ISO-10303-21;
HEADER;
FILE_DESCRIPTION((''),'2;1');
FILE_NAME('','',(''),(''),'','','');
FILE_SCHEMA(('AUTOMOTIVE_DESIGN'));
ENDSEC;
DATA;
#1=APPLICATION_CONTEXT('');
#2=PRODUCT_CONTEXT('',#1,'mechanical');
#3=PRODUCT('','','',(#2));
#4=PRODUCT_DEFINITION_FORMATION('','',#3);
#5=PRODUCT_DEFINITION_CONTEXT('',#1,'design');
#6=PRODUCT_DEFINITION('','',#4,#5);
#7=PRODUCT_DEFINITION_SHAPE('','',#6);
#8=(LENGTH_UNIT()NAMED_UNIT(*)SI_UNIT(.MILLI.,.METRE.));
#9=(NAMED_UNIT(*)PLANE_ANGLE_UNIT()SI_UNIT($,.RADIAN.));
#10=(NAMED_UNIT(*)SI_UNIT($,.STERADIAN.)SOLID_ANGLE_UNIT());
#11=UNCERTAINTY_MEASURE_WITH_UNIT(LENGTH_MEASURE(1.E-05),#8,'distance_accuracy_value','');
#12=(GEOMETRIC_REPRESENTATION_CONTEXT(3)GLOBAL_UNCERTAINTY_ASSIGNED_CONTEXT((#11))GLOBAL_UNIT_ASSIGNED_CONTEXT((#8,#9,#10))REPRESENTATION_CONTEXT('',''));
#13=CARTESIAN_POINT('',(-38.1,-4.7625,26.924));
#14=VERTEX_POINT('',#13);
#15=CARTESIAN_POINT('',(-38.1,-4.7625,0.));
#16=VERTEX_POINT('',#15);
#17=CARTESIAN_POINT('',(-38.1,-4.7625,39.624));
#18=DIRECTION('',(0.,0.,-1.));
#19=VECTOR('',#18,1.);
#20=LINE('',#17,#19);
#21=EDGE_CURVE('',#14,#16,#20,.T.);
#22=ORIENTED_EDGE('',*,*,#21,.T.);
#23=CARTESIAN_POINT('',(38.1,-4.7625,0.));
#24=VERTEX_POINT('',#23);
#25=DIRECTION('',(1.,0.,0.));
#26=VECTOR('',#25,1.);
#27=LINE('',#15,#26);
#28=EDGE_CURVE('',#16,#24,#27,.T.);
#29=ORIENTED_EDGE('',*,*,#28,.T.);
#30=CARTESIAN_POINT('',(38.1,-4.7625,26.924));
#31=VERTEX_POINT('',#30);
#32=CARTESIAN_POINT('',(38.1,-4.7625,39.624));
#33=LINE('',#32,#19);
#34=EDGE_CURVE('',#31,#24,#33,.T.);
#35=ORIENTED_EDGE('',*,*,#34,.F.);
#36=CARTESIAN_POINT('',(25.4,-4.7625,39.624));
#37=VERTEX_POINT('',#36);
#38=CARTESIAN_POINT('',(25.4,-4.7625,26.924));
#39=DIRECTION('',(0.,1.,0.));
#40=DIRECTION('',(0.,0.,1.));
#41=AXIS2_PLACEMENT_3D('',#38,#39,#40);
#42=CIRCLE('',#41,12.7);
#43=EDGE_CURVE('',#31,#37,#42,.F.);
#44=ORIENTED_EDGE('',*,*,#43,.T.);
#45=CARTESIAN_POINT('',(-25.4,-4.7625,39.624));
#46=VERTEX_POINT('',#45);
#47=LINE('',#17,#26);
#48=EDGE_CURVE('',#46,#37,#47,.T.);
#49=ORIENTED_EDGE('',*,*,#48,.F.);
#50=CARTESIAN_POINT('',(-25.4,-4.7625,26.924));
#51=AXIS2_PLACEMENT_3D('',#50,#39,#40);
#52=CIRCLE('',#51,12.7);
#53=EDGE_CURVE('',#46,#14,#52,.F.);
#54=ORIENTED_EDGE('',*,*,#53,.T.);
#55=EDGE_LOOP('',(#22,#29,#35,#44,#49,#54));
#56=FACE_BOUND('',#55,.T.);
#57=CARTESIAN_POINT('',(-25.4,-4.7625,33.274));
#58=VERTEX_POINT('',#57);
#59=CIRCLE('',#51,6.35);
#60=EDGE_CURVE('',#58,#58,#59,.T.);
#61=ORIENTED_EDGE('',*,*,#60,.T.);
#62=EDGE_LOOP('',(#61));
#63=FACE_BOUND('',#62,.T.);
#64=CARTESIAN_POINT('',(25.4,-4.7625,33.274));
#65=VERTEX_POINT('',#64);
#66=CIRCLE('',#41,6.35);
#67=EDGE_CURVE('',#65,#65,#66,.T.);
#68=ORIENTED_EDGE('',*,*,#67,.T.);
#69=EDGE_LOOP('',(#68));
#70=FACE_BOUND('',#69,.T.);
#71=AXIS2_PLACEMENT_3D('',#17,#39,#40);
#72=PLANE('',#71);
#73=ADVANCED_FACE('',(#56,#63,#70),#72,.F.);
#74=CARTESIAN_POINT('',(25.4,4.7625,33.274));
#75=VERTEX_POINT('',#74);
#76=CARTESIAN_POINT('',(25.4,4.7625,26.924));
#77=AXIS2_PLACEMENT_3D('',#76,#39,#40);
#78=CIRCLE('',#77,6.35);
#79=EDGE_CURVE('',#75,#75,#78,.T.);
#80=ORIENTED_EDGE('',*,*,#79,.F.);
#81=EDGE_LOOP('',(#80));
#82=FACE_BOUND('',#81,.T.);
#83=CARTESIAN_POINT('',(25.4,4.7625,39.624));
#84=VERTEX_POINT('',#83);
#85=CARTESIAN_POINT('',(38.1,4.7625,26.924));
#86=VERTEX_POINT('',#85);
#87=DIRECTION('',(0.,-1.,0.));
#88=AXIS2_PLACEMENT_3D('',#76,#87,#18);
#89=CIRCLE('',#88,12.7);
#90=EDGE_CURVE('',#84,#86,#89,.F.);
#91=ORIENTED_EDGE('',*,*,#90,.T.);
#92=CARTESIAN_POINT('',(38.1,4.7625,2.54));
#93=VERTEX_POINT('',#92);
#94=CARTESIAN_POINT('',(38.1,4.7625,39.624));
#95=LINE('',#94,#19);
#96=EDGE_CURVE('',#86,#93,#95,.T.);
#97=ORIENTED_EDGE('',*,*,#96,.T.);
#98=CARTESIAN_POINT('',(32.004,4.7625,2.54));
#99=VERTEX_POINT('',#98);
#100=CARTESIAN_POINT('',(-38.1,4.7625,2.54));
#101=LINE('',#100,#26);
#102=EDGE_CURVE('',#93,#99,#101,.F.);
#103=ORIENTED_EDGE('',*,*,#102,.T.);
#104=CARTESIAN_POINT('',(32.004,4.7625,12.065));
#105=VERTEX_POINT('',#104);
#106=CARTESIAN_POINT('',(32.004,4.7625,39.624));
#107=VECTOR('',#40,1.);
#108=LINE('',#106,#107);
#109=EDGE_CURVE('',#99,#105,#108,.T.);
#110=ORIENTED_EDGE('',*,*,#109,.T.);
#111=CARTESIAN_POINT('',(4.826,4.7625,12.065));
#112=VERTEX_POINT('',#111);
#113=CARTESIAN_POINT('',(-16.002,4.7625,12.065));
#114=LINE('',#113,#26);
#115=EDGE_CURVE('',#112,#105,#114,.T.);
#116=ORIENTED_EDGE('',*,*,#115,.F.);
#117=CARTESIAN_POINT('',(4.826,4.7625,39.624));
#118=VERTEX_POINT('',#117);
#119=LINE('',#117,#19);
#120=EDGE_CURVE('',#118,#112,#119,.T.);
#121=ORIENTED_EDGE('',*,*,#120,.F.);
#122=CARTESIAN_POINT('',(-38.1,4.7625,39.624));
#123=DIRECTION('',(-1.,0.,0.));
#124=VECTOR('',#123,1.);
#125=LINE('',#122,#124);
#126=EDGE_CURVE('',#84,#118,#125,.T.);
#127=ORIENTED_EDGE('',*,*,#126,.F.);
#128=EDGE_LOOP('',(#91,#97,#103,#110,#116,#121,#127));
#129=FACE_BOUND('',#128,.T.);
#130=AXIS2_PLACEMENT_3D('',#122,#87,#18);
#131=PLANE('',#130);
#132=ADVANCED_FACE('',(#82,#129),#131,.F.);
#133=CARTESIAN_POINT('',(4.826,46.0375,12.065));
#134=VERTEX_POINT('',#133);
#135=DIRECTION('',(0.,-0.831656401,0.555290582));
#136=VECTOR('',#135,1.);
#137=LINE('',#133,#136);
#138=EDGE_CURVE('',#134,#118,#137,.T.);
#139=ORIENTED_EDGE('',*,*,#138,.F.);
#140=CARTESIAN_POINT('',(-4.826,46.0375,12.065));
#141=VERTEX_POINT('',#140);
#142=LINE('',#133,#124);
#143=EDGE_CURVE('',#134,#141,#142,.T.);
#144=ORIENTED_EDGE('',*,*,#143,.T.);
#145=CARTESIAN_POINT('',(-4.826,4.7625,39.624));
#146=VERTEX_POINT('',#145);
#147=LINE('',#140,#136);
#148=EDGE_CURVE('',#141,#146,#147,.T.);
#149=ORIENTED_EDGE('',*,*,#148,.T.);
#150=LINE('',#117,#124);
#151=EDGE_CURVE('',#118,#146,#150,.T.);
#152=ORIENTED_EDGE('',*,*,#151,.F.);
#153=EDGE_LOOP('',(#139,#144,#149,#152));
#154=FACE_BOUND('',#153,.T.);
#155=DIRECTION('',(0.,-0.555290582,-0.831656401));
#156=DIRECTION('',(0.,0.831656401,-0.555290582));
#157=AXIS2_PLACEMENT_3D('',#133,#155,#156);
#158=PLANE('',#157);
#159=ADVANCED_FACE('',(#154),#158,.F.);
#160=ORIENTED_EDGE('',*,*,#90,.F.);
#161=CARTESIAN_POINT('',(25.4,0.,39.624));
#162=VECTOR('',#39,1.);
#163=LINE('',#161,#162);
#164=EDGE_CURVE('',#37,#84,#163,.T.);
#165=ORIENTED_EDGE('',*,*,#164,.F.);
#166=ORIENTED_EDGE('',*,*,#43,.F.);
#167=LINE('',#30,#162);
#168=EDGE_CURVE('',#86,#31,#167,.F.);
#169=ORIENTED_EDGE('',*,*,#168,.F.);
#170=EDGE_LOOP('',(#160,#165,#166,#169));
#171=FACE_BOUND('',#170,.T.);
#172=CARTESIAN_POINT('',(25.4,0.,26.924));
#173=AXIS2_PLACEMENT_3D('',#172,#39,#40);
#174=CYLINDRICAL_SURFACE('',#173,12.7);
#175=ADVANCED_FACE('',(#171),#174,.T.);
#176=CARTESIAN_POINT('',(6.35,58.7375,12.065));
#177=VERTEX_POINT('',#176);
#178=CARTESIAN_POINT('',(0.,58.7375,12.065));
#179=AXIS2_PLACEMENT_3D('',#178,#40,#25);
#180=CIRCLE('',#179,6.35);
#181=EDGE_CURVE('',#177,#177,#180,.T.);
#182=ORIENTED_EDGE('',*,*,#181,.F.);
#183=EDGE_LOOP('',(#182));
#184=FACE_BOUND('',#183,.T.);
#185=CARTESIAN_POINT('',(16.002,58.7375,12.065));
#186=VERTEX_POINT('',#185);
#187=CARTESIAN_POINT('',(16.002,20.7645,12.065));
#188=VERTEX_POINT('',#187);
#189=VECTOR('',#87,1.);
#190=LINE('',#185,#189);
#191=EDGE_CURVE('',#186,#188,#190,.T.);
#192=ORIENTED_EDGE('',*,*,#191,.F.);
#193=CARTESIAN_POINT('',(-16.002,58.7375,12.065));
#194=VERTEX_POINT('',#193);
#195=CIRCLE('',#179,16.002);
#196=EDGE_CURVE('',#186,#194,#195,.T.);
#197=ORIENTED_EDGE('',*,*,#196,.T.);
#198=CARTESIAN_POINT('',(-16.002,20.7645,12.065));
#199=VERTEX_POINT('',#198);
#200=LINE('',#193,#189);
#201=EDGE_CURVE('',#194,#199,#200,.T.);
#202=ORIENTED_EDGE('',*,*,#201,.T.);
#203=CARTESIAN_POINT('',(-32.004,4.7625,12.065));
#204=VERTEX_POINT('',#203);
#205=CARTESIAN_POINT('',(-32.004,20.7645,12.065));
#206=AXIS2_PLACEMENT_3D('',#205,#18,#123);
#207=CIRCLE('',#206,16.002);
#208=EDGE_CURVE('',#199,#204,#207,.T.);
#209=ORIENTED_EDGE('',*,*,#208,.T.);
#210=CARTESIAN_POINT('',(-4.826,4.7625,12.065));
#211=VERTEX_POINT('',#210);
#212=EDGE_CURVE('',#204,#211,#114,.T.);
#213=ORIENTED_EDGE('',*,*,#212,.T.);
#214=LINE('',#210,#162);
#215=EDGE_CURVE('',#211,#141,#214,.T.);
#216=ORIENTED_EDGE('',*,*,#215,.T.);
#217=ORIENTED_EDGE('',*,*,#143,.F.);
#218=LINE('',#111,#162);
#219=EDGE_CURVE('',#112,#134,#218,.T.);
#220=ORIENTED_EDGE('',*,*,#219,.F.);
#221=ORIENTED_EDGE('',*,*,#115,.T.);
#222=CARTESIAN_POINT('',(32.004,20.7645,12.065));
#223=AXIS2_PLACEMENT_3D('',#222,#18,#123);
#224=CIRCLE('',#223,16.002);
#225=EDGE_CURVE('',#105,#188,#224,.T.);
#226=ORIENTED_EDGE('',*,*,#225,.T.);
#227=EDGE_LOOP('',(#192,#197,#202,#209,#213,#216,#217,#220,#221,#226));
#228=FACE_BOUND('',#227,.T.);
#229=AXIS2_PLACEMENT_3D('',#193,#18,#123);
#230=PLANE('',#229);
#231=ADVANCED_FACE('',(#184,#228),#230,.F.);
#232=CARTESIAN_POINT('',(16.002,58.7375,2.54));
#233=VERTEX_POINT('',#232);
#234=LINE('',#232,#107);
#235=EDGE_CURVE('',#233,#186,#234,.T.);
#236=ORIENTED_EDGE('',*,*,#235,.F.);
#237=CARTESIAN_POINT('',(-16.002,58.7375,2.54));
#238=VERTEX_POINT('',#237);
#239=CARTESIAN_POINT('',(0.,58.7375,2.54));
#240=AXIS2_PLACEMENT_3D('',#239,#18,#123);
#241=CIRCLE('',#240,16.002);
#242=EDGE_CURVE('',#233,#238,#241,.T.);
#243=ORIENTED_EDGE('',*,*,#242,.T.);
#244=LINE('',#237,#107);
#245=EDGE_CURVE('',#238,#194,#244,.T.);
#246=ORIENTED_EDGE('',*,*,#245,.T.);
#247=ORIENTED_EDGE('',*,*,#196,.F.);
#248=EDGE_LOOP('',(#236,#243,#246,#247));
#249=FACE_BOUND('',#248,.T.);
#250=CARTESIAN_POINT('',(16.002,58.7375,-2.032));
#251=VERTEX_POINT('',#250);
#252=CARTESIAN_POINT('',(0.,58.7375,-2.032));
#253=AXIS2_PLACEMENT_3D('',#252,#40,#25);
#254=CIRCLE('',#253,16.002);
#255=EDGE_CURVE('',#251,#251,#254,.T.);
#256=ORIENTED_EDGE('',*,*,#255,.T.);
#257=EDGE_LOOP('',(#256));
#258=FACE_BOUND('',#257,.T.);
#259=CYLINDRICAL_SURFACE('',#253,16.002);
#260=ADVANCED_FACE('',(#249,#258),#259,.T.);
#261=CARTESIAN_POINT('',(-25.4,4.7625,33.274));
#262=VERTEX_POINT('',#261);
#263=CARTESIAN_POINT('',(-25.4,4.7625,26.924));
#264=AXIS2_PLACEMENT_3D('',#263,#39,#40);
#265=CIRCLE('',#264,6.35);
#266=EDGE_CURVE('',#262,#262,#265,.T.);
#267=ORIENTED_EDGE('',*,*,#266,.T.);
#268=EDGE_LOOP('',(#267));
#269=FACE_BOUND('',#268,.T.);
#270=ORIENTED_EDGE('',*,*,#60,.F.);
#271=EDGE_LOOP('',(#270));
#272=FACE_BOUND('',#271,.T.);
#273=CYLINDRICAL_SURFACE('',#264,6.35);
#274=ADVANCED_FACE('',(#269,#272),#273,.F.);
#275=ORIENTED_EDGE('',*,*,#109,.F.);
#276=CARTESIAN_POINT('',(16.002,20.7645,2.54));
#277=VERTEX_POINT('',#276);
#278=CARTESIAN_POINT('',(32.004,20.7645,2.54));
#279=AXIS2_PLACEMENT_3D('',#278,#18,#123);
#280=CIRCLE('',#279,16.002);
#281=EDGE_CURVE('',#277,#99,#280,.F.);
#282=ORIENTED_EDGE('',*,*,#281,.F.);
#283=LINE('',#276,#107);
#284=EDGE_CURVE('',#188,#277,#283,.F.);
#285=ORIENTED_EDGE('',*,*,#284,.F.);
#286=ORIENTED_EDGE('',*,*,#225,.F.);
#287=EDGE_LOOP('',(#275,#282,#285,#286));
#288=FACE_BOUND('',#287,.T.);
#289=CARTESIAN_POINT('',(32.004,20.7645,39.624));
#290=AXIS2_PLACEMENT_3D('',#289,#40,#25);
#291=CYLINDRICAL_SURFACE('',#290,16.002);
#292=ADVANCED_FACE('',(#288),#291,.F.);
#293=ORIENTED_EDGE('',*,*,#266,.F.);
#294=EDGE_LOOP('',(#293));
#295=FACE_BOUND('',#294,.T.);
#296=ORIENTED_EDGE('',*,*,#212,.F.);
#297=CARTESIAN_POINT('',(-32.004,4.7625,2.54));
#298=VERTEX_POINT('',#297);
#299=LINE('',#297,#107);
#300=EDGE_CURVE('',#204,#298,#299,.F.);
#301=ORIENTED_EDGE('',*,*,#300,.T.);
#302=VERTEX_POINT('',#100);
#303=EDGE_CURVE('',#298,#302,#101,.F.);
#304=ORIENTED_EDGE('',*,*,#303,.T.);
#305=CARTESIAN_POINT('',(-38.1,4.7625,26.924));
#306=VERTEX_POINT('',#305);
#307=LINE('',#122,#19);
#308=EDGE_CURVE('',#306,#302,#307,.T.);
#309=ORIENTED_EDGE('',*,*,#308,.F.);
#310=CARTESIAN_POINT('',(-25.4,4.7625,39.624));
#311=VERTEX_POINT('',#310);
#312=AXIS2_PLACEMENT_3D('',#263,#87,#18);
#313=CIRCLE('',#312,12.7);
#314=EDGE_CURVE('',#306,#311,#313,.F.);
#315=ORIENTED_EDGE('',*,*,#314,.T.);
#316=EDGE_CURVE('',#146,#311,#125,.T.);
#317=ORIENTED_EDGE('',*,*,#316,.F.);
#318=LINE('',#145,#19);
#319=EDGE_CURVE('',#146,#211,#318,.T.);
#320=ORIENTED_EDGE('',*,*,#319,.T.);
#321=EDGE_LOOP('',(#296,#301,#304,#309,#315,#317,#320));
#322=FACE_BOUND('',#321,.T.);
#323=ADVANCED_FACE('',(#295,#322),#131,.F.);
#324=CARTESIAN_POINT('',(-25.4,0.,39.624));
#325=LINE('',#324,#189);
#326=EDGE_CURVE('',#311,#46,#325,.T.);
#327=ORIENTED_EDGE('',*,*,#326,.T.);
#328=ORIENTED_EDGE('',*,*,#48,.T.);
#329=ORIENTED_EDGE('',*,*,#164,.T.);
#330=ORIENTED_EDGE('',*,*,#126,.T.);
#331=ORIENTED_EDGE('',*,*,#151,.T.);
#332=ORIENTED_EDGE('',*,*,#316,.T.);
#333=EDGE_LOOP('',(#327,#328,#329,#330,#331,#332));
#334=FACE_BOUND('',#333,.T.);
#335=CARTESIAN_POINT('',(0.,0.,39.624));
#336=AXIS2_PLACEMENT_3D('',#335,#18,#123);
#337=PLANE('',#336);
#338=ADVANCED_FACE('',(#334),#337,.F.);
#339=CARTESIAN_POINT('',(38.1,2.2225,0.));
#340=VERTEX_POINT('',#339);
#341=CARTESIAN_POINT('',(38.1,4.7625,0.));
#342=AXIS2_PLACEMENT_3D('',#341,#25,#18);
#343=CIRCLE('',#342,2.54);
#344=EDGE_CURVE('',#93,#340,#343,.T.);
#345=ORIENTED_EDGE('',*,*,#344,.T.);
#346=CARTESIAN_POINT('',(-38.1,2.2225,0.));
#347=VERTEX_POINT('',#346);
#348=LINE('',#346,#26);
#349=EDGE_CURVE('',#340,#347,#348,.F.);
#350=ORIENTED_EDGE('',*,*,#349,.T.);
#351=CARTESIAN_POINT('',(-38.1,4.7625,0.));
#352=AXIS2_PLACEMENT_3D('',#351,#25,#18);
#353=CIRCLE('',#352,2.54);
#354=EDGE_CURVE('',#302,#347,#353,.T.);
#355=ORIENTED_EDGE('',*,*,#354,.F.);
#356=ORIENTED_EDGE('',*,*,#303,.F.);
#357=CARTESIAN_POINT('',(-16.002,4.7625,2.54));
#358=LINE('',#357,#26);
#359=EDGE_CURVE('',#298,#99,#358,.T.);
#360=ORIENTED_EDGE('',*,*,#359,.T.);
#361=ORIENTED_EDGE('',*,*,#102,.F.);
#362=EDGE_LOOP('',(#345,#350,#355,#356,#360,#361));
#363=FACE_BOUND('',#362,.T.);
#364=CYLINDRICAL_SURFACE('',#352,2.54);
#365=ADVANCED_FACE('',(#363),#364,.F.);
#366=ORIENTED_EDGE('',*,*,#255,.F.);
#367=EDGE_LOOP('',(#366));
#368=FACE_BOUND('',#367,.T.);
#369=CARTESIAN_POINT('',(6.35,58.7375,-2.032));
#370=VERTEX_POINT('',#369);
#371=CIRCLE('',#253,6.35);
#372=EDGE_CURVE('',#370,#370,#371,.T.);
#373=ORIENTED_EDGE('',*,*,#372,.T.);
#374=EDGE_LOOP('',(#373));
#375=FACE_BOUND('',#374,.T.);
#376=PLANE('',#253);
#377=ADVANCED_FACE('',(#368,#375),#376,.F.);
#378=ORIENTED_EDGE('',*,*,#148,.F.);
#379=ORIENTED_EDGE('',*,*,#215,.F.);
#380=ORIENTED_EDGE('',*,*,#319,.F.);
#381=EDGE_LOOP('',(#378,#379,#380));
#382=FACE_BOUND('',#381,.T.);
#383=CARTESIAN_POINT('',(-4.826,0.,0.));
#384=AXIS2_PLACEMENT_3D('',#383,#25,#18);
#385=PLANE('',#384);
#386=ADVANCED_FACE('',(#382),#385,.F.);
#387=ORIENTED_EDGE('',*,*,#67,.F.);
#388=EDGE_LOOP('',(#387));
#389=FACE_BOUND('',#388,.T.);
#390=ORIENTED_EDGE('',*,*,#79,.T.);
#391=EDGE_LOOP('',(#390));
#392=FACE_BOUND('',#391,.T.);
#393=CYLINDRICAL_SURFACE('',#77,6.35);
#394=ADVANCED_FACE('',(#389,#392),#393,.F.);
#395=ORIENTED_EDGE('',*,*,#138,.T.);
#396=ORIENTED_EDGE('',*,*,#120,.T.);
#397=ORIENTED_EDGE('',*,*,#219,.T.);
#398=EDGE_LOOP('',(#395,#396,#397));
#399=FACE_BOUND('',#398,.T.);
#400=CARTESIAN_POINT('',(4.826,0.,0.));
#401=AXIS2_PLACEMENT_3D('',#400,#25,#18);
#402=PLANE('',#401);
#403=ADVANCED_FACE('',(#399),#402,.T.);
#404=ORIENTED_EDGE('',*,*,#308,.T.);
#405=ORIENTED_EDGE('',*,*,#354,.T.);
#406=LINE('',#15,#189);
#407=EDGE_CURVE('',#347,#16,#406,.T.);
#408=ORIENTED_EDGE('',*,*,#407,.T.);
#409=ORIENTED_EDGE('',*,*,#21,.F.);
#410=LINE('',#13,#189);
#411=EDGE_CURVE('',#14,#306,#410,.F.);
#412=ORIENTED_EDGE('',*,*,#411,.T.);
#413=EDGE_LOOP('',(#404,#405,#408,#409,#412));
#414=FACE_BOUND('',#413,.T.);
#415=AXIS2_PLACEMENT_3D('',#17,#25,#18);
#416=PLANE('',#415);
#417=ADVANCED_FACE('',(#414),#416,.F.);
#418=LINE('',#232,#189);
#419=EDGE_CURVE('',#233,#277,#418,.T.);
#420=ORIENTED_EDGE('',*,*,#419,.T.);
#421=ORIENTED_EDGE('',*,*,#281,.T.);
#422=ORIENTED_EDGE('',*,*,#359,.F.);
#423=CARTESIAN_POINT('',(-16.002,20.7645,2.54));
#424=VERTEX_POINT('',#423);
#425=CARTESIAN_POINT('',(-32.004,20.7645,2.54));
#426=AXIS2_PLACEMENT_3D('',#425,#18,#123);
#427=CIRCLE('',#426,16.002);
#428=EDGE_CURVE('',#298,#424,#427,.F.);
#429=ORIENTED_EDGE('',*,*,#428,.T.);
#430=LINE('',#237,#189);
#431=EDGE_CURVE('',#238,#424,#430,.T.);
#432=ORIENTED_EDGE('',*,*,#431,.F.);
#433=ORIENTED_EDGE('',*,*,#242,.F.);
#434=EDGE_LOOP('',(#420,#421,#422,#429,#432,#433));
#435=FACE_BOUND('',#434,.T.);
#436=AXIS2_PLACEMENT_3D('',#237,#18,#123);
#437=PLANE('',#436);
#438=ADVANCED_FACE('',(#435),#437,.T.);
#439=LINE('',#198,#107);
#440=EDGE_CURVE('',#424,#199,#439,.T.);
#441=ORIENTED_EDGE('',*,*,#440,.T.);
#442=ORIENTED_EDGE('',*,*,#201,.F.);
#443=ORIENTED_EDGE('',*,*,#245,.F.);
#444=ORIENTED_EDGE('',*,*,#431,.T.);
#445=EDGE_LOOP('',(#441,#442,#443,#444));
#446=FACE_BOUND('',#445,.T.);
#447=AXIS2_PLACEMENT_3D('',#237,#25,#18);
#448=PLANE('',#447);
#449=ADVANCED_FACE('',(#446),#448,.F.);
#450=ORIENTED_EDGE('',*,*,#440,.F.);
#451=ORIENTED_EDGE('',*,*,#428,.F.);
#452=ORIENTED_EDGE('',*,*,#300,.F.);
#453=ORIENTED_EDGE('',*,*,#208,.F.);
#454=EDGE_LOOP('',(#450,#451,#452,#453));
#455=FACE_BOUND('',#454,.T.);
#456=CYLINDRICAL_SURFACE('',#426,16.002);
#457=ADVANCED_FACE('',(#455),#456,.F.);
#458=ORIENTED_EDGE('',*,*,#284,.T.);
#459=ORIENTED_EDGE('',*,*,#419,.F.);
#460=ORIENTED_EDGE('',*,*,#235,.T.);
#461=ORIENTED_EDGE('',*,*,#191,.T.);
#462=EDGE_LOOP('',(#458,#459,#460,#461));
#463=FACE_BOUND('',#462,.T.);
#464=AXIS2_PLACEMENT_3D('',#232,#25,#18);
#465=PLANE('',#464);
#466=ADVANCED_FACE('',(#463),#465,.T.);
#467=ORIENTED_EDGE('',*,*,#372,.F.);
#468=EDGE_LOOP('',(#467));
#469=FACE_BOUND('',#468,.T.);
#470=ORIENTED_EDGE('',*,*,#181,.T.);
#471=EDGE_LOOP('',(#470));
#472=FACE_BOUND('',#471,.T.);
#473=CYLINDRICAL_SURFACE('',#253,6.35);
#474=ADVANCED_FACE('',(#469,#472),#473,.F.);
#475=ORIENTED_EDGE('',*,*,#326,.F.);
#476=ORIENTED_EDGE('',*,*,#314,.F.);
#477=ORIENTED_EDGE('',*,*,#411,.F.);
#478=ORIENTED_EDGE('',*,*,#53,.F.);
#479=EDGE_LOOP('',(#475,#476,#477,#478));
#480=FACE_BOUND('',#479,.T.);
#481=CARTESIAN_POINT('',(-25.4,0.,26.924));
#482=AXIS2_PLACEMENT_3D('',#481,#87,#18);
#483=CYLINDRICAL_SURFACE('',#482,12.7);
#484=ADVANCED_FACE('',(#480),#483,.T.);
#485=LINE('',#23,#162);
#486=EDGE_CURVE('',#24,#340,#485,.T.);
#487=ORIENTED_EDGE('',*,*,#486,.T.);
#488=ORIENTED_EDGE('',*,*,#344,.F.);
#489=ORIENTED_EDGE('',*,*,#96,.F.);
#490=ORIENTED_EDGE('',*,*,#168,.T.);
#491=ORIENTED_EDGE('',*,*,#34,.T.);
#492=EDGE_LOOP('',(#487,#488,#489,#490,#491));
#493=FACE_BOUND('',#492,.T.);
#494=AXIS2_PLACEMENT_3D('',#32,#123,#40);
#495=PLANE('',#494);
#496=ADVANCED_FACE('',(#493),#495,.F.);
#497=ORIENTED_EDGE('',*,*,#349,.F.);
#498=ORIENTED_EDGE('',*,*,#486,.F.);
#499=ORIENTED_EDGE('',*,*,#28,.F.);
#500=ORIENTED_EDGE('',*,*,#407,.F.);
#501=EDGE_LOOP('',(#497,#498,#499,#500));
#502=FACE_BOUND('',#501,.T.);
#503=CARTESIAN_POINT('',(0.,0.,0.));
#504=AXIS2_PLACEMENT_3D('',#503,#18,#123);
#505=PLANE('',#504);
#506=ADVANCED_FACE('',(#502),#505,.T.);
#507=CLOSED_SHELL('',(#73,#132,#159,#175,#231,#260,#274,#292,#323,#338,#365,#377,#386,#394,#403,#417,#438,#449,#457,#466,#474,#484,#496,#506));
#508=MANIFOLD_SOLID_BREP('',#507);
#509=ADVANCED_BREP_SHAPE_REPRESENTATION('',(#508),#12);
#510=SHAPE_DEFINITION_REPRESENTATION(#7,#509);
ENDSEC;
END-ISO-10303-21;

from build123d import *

# Parameters (mm, degrees)
SKETCH1_W                  = 76.2
SKETCH1_H                  = 9.525
BOSS_EXTRUDE1_DEPTH        = 39.624
FILLET1_R                  = 12.7
SKETCH2_R                  = 2.54
CUT_EXTRUDE1_DEPTH         = 87.018502558
SKETCH3_W                  = 32.004
SKETCH3_H                  = 9.525
BOSS_EXTRUDE2_DEPTH        = 53.975
FILLET2_R                  = 16.002
FILLET3_R                  = 16.002
SKETCH4_R                  = 16.002
BOSS_EXTRUDE3_DEPTH        = 14.097
BOSS_EXTRUDE4_DEPTH        = 4.826
SKETCH6_R                  = 6.35
CUT_EXTRUDE2_DEPTH         = 89.301196715
F_3_8_0_5_DIAMETER_HOLE1_D = 12.7


with BuildPart() as part:
    # Sketch1 → Boss-Extrude1 (new body)
    with BuildSketch(Plane.XY):
        Rectangle(SKETCH1_W, SKETCH1_H)
    extrude(amount=BOSS_EXTRUDE1_DEPTH)

    # Fillet1
    fillet1_edges = [part.edges().sort_by_distance(p)[0] for p in [
        (-38.1, 0, 39.624),
        (38.1, 0, 39.624),
    ]]
    fillet(fillet1_edges, radius=FILLET1_R)

    # Sketch2 → Cut-Extrude1 (cut, through all)
    with BuildSketch(Plane(origin=(38.1, 0, 0), x_dir=(0, 0, -1), z_dir=(1, 0, 0))):
        with Locations((0, 4.7625)):
            Circle(SKETCH2_R)
    extrude(amount=-CUT_EXTRUDE1_DEPTH, mode=Mode.SUBTRACT)

    # Sketch3 → Boss-Extrude2 (add)
    with BuildSketch(Plane(origin=(0, 4.7625, 0), x_dir=(1, 0, 0), z_dir=(0, 1, 0))):
        with Locations((0, -7.3025)):
            Rectangle(SKETCH3_W, SKETCH3_H)
    extrude(amount=BOSS_EXTRUDE2_DEPTH)

    # Fillet2
    fillet2_edges = [part.edges().sort_by_distance(p)[0] for p in [
        (-16.002, 4.7625, 7.3025),
    ]]
    fillet(fillet2_edges, radius=FILLET2_R)

    # Fillet3
    # the kernel refuses this fillet: 16.002 mm, written as the material it adds along each edge
    with BuildSketch(Plane(origin=(16.002, 4.7625, 2.54), x_dir=(0, 1, 0), z_dir=(0, 0, 1))) as fillet3_piece_1:
        with BuildLine():
            CenterArc((FILLET3_R, -FILLET3_R), FILLET3_R, 90, 90)
            Line((0, -FILLET3_R), (0, 0))
            Line((0, 0), (FILLET3_R, 0))
        make_face()
    extrude(amount=9.525)

    # Sketch4 → Boss-Extrude3 (add)
    with BuildSketch(Plane.XY.offset(12.065)):
        with Locations((0, 58.7375)):
            Circle(SKETCH4_R)
    extrude(amount=-BOSS_EXTRUDE3_DEPTH)

    # Sketch5 → Boss-Extrude4 (add, symmetric)
    with BuildSketch(Plane(origin=(0, 0, 0), x_dir=(0, 0, -1), z_dir=(1, 0, 0))):
        Polygon((-39.624, 4.7625), (-12.065, 4.7625), (-12.065, 46.0375), align=None)
    extrude(amount=BOSS_EXTRUDE4_DEPTH, both=True)

    # Sketch6 → Cut-Extrude2 (cut, through all)
    with BuildSketch(Plane.XY.offset(12.065)):
        with Locations((0, 58.7375)):
            Circle(SKETCH6_R)
    extrude(amount=-CUT_EXTRUDE2_DEPTH, mode=Mode.SUBTRACT)

    # 3/8 (0.5) Diameter Hole1 (through all)
    with Locations(Plane(origin=(0, 4.7625, 0), x_dir=(1, 0, 0), z_dir=(0, 1, 0))):
        with Locations((-25.4, -26.924), (25.4, -26.924)):
            Hole(F_3_8_0_5_DIAMETER_HOLE1_D / 2)


solid = part.part
